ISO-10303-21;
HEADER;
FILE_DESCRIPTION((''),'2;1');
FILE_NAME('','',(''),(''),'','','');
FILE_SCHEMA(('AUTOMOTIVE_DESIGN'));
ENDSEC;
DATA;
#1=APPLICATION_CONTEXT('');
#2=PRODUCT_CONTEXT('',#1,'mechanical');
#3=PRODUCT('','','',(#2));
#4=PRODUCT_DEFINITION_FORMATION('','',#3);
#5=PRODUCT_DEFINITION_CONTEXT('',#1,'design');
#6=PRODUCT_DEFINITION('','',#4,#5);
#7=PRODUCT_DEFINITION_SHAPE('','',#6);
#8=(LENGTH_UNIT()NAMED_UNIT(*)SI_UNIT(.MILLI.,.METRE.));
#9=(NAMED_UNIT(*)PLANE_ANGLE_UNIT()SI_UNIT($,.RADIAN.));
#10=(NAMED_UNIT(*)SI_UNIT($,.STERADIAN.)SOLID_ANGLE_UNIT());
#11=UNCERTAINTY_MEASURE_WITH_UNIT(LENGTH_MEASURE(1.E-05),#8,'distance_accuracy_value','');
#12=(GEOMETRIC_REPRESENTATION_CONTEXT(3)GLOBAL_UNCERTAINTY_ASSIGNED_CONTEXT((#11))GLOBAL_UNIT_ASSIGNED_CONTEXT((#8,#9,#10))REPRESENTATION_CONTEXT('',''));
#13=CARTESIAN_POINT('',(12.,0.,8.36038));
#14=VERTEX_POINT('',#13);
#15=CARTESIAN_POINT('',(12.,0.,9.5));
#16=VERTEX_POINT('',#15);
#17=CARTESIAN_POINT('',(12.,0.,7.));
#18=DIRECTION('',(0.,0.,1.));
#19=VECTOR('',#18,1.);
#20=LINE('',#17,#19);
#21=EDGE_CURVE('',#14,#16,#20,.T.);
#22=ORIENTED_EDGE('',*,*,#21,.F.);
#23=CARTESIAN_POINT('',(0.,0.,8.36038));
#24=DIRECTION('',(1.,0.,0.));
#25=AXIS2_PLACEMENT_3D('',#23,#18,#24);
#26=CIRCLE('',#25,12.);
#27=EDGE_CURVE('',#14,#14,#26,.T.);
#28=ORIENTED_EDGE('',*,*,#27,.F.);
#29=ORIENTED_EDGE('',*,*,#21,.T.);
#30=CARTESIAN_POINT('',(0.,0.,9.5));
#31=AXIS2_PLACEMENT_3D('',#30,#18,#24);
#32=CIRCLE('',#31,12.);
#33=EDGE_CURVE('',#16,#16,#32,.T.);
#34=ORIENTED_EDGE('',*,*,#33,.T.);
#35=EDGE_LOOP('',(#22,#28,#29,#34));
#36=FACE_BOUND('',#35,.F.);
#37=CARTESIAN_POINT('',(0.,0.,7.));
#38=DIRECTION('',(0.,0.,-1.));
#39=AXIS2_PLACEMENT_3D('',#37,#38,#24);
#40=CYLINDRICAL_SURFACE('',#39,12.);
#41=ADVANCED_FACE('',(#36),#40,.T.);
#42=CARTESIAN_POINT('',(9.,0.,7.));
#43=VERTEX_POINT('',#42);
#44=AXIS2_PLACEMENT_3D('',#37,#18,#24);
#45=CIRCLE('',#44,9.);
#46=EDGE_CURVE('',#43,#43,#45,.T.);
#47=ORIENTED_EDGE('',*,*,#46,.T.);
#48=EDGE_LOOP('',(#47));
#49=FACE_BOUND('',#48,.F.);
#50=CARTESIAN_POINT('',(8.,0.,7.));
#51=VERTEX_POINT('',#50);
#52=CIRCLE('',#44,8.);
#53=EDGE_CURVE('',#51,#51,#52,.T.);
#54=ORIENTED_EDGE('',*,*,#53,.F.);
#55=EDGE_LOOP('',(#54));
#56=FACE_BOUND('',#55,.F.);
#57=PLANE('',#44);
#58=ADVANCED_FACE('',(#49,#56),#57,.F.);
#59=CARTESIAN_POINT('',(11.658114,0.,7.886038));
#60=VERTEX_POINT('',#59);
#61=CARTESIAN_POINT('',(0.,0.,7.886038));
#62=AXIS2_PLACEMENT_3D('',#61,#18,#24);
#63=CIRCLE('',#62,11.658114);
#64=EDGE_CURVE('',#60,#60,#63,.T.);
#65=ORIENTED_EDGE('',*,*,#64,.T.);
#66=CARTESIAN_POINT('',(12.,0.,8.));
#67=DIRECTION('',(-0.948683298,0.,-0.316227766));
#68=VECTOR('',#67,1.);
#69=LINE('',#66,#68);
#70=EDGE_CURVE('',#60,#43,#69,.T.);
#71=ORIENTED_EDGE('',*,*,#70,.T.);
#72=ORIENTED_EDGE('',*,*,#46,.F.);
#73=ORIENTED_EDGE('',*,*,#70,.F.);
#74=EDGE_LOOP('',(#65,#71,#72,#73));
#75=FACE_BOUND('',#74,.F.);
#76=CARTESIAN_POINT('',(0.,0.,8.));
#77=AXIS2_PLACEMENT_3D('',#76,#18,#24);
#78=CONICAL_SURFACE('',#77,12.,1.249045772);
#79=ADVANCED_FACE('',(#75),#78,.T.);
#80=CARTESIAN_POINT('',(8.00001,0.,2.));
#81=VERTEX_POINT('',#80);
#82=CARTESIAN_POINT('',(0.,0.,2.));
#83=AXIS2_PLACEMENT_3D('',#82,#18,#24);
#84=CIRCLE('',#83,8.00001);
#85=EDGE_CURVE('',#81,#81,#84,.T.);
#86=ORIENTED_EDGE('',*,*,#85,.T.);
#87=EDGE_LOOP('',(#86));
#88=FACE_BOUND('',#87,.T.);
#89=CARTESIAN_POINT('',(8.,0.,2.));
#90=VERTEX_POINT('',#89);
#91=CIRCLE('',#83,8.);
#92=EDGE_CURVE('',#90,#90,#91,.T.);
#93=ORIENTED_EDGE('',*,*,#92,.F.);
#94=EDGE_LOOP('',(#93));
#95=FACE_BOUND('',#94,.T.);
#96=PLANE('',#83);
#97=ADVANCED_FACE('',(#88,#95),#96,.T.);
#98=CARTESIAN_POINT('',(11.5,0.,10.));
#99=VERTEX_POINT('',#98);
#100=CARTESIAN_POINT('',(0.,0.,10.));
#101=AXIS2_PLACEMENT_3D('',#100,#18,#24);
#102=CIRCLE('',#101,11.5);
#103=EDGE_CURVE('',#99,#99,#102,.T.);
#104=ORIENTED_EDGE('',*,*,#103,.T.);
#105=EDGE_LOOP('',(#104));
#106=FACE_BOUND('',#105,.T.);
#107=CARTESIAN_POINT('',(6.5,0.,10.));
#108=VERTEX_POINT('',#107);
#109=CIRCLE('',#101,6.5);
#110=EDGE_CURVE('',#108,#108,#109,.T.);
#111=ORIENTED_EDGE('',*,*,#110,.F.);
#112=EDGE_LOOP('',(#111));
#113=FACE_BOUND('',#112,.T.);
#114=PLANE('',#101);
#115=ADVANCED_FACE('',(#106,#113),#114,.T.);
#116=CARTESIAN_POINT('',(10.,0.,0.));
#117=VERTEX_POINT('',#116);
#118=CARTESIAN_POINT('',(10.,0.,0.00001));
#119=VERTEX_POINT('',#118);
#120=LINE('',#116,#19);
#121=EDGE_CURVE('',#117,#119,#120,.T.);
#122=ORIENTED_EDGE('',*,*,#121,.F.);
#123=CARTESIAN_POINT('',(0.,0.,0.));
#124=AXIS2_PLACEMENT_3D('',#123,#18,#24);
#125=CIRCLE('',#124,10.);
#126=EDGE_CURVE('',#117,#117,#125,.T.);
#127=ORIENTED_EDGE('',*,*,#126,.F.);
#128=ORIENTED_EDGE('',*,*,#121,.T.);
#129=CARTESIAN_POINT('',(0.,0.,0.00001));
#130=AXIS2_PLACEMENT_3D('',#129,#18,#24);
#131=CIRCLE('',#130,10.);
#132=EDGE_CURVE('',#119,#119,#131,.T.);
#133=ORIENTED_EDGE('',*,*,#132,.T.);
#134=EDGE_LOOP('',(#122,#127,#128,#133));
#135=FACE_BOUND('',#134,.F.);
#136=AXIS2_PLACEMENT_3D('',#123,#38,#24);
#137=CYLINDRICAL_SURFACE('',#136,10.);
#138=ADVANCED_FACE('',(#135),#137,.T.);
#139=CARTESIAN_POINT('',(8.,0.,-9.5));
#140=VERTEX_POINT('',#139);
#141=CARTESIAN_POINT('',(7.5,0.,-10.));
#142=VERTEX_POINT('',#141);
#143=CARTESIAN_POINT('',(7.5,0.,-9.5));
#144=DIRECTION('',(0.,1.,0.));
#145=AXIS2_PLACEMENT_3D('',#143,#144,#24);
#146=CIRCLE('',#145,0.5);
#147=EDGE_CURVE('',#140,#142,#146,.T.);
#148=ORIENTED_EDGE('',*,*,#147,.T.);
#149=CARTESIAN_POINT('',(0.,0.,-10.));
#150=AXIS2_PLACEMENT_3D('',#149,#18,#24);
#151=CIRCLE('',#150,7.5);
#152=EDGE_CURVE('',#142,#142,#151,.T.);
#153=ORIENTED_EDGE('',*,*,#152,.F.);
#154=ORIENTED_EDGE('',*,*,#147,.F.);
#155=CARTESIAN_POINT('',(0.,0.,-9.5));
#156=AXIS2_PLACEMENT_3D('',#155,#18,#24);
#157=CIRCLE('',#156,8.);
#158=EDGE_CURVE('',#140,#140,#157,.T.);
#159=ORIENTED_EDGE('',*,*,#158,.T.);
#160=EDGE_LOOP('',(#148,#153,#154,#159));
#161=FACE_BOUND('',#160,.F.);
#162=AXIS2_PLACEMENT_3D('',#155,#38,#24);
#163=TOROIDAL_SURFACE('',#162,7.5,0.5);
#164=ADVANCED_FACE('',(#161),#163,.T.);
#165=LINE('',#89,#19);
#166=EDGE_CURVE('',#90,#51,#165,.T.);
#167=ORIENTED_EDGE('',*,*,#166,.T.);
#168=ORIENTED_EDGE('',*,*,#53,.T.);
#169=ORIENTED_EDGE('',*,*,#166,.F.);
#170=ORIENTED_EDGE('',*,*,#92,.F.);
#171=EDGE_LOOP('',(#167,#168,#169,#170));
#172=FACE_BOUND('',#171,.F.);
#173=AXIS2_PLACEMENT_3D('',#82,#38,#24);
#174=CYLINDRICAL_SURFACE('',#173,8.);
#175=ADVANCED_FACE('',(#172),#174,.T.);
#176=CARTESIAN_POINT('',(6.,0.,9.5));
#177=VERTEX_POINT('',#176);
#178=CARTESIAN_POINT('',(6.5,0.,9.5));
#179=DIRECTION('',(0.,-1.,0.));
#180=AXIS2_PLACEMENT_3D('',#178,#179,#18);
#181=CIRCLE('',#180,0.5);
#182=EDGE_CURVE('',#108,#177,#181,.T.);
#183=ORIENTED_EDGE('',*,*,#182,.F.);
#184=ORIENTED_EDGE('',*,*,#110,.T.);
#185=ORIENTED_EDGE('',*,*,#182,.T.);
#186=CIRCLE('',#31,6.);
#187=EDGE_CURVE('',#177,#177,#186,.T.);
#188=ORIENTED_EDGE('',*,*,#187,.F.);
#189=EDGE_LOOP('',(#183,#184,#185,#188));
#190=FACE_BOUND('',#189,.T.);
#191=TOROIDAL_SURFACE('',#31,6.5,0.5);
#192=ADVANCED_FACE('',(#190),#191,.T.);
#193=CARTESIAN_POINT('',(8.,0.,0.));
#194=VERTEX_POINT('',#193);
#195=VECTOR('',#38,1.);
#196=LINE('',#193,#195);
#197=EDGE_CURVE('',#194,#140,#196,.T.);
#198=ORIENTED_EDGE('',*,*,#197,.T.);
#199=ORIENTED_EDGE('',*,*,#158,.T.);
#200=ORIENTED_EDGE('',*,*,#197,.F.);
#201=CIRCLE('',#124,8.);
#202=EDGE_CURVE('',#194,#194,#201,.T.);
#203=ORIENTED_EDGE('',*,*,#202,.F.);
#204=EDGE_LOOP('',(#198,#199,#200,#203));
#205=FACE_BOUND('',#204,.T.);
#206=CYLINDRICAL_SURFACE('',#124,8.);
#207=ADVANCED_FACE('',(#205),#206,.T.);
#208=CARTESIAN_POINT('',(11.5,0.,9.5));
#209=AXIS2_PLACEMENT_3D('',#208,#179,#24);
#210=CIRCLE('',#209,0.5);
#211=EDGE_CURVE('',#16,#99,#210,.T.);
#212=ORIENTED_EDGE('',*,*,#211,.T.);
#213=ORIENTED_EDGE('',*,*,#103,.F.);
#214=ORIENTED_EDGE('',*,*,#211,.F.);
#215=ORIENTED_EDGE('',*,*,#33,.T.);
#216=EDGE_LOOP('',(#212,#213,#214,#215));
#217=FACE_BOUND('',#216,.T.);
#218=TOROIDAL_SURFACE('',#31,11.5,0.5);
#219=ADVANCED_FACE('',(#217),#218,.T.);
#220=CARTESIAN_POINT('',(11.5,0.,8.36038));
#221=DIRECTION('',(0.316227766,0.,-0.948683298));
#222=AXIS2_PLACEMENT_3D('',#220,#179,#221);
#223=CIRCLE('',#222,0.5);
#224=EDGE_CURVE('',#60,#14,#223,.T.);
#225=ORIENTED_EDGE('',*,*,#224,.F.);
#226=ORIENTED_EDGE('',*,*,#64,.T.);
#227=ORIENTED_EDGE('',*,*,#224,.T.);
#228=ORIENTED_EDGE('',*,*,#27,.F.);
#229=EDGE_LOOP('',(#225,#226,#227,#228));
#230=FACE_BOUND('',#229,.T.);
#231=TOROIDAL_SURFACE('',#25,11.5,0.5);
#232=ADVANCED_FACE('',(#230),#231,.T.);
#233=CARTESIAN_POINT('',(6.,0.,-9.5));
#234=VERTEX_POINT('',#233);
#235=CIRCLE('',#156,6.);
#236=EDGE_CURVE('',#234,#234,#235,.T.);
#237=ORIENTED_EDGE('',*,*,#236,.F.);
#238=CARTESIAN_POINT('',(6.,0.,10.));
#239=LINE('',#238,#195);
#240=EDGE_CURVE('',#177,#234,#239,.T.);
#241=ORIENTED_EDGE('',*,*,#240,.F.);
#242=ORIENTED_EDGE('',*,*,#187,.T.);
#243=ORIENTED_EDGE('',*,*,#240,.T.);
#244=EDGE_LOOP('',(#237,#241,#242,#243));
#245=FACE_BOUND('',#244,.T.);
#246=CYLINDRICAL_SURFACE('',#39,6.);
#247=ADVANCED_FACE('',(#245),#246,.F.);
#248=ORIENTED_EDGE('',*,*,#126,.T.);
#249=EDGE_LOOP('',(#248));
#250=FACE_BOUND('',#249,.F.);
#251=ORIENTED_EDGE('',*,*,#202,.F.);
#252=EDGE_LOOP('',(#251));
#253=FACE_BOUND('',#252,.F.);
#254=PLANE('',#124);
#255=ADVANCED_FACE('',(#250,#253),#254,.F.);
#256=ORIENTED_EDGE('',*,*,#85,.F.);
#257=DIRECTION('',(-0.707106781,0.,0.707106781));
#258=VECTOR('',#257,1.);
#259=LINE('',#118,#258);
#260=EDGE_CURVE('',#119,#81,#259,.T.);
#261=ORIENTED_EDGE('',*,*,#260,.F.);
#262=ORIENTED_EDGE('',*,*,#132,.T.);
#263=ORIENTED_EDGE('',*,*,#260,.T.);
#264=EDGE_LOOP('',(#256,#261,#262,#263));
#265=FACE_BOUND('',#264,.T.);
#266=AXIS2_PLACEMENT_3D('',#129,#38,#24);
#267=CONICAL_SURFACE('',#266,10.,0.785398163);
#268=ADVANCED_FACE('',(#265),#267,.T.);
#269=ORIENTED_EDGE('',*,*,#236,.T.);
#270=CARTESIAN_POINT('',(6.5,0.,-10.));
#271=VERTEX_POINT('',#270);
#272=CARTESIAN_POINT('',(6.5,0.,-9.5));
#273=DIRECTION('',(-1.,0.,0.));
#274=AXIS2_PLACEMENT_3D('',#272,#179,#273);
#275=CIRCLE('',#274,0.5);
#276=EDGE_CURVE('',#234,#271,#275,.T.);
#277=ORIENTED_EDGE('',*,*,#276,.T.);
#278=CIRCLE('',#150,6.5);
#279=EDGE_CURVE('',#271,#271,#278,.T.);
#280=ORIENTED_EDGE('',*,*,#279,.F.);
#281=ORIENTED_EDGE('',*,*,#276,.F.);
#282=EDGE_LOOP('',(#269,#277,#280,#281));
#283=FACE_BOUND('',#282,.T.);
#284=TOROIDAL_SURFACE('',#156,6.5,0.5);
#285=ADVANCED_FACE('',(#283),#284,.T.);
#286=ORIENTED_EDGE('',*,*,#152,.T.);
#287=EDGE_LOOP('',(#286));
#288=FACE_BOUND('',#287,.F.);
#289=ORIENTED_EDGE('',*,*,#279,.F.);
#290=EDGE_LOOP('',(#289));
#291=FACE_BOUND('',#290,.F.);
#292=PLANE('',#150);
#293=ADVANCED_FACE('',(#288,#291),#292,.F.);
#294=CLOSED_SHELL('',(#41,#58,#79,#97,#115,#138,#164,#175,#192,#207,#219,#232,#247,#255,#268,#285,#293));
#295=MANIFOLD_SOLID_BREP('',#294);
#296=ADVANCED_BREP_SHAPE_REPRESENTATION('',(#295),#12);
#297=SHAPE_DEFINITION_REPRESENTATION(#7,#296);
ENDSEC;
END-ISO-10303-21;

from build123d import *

# Parameters (mm, degrees)
F0_R     = 8
F0_R_2   = 6
F1_DEPTH = 10
F2_R     = 10
F2_R_2   = 6
F3_DEPTH = 2
F4_R     = 8
F4_R_2   = 6
F5_DEPTH = 5
F6_R     = 12
F6_R_2   = 6
F7_DEPTH = 3
F8_SIZE  = 1.99999
F9_SIZE2 = 3
F9_SIZE  = 1


# Not quite as in the source:
# - a fillet or chamfer that OpenCascade refuses, or shapes differently, is made with other operations: its cross-section is extruded or revolved along the edge and cut away or added
# - a fillet or chamfer is up to 0.001 mm smaller than in the source, because OpenCascade refuses the exact size


with BuildPart() as f1:
    # F0 (on Top) → F1 (new body)
    with BuildSketch(Plane.XY):
        Circle(F0_R)
        Circle(F0_R_2, mode=Mode.SUBTRACT)
    extrude(amount=-F1_DEPTH)

    # F2 (on Top) → F3 (join)
    with BuildSketch(Plane.XY):
        Circle(F2_R)
        Circle(F2_R_2, mode=Mode.SUBTRACT)
    extrude(amount=F3_DEPTH)

    # F4 (on face) → F5 (join)
    with BuildSketch(Plane.XY.offset(2)):
        Circle(F4_R)
        Circle(F4_R_2, mode=Mode.SUBTRACT)
    extrude(amount=F5_DEPTH)

    # F6 (on face) → F7 (join)
    with BuildSketch(Plane.XY.offset(7)):
        Circle(F6_R)
        Circle(F6_R_2, mode=Mode.SUBTRACT)
    extrude(amount=F7_DEPTH)

    # F8 (size 2 in the source; OpenCascade refuses exactly that, so slightly less here)
    f8_edges = [f1.edges().sort_by_distance(p)[0] for p in [
        (-10, 0, 2),
    ]]
    chamfer(f8_edges, length=F8_SIZE)

    # F9
    f9_edges = [f1.edges().sort_by_distance(p)[0] for p in [
        (-12, 0, 7),
    ]]
    f9_side = f1.faces().sort_by_distance((-12, 0, 8.5))[0]
    chamfer(f9_edges, length=F9_SIZE, length2=F9_SIZE2, reference=f9_side)

    # F10: fillet of radius 0.5 on 13 edges, made by hand

    # F10_s1 → F10_t2 (revolve, cut)
    with BuildSketch(Plane.XZ):
        with BuildLine():
            ThreePointArc((11.658113883, 7.886037961), (11.9056210926, 8.0680244677), (12, 8.36037961))
            Line((12, 8.36037961), (12, 8))
            Line((12, 8), (11.658113883, 7.886037961))
        make_face()
    revolve(axis=Axis((0, 0, 8), (0, 0, 1)), mode=Mode.SUBTRACT)

    # F10_s3 → F10_t4 (revolve, cut)
    with BuildSketch(Plane.XZ):
        with BuildLine():
            ThreePointArc((12, 9.5), (11.8535533906, 9.8535533906), (11.5, 10))
            Line((11.5, 10), (12, 10))
            Line((12, 10), (12, 9.5))
        make_face()
    revolve(axis=Axis((0, 0, 10), (0, 0, 1)), mode=Mode.SUBTRACT)

    # F10_s5 → F10_t6 (revolve, cut)
    with BuildSketch(Plane.XZ):
        with BuildLine():
            ThreePointArc((6, -9.5), (6.1464466094, -9.8535533906), (6.5, -10))
            Line((6.5, -10), (6, -10))
            Line((6, -10), (6, -9.5))
        make_face()
    revolve(axis=Axis((0, 0, -10), (0, 0, 1)), mode=Mode.SUBTRACT)

    # F10_s7 → F10_t8 (revolve, cut)
    with BuildSketch(Plane.XZ):
        with BuildLine():
            ThreePointArc((6.5, 10), (6.1464466094, 9.8535533906), (6, 9.5))
            Line((6, 9.5), (6, 10))
            Line((6, 10), (6.5, 10))
        make_face()
    revolve(axis=Axis((0, 0, 10), (0, 0, 1)), mode=Mode.SUBTRACT)

    # F10_s9 → F10_t10 (revolve, cut)
    with BuildSketch(Plane.XZ):
        with BuildLine():
            ThreePointArc((8, -9.5), (7.8535533906, -9.8535533906), (7.5, -10))
            Line((7.5, -10), (8, -10))
            Line((8, -10), (8, -9.5))
        make_face()
    revolve(axis=Axis((0, 0, -10), (0, 0, 1)), mode=Mode.SUBTRACT)


solid = f1.part
